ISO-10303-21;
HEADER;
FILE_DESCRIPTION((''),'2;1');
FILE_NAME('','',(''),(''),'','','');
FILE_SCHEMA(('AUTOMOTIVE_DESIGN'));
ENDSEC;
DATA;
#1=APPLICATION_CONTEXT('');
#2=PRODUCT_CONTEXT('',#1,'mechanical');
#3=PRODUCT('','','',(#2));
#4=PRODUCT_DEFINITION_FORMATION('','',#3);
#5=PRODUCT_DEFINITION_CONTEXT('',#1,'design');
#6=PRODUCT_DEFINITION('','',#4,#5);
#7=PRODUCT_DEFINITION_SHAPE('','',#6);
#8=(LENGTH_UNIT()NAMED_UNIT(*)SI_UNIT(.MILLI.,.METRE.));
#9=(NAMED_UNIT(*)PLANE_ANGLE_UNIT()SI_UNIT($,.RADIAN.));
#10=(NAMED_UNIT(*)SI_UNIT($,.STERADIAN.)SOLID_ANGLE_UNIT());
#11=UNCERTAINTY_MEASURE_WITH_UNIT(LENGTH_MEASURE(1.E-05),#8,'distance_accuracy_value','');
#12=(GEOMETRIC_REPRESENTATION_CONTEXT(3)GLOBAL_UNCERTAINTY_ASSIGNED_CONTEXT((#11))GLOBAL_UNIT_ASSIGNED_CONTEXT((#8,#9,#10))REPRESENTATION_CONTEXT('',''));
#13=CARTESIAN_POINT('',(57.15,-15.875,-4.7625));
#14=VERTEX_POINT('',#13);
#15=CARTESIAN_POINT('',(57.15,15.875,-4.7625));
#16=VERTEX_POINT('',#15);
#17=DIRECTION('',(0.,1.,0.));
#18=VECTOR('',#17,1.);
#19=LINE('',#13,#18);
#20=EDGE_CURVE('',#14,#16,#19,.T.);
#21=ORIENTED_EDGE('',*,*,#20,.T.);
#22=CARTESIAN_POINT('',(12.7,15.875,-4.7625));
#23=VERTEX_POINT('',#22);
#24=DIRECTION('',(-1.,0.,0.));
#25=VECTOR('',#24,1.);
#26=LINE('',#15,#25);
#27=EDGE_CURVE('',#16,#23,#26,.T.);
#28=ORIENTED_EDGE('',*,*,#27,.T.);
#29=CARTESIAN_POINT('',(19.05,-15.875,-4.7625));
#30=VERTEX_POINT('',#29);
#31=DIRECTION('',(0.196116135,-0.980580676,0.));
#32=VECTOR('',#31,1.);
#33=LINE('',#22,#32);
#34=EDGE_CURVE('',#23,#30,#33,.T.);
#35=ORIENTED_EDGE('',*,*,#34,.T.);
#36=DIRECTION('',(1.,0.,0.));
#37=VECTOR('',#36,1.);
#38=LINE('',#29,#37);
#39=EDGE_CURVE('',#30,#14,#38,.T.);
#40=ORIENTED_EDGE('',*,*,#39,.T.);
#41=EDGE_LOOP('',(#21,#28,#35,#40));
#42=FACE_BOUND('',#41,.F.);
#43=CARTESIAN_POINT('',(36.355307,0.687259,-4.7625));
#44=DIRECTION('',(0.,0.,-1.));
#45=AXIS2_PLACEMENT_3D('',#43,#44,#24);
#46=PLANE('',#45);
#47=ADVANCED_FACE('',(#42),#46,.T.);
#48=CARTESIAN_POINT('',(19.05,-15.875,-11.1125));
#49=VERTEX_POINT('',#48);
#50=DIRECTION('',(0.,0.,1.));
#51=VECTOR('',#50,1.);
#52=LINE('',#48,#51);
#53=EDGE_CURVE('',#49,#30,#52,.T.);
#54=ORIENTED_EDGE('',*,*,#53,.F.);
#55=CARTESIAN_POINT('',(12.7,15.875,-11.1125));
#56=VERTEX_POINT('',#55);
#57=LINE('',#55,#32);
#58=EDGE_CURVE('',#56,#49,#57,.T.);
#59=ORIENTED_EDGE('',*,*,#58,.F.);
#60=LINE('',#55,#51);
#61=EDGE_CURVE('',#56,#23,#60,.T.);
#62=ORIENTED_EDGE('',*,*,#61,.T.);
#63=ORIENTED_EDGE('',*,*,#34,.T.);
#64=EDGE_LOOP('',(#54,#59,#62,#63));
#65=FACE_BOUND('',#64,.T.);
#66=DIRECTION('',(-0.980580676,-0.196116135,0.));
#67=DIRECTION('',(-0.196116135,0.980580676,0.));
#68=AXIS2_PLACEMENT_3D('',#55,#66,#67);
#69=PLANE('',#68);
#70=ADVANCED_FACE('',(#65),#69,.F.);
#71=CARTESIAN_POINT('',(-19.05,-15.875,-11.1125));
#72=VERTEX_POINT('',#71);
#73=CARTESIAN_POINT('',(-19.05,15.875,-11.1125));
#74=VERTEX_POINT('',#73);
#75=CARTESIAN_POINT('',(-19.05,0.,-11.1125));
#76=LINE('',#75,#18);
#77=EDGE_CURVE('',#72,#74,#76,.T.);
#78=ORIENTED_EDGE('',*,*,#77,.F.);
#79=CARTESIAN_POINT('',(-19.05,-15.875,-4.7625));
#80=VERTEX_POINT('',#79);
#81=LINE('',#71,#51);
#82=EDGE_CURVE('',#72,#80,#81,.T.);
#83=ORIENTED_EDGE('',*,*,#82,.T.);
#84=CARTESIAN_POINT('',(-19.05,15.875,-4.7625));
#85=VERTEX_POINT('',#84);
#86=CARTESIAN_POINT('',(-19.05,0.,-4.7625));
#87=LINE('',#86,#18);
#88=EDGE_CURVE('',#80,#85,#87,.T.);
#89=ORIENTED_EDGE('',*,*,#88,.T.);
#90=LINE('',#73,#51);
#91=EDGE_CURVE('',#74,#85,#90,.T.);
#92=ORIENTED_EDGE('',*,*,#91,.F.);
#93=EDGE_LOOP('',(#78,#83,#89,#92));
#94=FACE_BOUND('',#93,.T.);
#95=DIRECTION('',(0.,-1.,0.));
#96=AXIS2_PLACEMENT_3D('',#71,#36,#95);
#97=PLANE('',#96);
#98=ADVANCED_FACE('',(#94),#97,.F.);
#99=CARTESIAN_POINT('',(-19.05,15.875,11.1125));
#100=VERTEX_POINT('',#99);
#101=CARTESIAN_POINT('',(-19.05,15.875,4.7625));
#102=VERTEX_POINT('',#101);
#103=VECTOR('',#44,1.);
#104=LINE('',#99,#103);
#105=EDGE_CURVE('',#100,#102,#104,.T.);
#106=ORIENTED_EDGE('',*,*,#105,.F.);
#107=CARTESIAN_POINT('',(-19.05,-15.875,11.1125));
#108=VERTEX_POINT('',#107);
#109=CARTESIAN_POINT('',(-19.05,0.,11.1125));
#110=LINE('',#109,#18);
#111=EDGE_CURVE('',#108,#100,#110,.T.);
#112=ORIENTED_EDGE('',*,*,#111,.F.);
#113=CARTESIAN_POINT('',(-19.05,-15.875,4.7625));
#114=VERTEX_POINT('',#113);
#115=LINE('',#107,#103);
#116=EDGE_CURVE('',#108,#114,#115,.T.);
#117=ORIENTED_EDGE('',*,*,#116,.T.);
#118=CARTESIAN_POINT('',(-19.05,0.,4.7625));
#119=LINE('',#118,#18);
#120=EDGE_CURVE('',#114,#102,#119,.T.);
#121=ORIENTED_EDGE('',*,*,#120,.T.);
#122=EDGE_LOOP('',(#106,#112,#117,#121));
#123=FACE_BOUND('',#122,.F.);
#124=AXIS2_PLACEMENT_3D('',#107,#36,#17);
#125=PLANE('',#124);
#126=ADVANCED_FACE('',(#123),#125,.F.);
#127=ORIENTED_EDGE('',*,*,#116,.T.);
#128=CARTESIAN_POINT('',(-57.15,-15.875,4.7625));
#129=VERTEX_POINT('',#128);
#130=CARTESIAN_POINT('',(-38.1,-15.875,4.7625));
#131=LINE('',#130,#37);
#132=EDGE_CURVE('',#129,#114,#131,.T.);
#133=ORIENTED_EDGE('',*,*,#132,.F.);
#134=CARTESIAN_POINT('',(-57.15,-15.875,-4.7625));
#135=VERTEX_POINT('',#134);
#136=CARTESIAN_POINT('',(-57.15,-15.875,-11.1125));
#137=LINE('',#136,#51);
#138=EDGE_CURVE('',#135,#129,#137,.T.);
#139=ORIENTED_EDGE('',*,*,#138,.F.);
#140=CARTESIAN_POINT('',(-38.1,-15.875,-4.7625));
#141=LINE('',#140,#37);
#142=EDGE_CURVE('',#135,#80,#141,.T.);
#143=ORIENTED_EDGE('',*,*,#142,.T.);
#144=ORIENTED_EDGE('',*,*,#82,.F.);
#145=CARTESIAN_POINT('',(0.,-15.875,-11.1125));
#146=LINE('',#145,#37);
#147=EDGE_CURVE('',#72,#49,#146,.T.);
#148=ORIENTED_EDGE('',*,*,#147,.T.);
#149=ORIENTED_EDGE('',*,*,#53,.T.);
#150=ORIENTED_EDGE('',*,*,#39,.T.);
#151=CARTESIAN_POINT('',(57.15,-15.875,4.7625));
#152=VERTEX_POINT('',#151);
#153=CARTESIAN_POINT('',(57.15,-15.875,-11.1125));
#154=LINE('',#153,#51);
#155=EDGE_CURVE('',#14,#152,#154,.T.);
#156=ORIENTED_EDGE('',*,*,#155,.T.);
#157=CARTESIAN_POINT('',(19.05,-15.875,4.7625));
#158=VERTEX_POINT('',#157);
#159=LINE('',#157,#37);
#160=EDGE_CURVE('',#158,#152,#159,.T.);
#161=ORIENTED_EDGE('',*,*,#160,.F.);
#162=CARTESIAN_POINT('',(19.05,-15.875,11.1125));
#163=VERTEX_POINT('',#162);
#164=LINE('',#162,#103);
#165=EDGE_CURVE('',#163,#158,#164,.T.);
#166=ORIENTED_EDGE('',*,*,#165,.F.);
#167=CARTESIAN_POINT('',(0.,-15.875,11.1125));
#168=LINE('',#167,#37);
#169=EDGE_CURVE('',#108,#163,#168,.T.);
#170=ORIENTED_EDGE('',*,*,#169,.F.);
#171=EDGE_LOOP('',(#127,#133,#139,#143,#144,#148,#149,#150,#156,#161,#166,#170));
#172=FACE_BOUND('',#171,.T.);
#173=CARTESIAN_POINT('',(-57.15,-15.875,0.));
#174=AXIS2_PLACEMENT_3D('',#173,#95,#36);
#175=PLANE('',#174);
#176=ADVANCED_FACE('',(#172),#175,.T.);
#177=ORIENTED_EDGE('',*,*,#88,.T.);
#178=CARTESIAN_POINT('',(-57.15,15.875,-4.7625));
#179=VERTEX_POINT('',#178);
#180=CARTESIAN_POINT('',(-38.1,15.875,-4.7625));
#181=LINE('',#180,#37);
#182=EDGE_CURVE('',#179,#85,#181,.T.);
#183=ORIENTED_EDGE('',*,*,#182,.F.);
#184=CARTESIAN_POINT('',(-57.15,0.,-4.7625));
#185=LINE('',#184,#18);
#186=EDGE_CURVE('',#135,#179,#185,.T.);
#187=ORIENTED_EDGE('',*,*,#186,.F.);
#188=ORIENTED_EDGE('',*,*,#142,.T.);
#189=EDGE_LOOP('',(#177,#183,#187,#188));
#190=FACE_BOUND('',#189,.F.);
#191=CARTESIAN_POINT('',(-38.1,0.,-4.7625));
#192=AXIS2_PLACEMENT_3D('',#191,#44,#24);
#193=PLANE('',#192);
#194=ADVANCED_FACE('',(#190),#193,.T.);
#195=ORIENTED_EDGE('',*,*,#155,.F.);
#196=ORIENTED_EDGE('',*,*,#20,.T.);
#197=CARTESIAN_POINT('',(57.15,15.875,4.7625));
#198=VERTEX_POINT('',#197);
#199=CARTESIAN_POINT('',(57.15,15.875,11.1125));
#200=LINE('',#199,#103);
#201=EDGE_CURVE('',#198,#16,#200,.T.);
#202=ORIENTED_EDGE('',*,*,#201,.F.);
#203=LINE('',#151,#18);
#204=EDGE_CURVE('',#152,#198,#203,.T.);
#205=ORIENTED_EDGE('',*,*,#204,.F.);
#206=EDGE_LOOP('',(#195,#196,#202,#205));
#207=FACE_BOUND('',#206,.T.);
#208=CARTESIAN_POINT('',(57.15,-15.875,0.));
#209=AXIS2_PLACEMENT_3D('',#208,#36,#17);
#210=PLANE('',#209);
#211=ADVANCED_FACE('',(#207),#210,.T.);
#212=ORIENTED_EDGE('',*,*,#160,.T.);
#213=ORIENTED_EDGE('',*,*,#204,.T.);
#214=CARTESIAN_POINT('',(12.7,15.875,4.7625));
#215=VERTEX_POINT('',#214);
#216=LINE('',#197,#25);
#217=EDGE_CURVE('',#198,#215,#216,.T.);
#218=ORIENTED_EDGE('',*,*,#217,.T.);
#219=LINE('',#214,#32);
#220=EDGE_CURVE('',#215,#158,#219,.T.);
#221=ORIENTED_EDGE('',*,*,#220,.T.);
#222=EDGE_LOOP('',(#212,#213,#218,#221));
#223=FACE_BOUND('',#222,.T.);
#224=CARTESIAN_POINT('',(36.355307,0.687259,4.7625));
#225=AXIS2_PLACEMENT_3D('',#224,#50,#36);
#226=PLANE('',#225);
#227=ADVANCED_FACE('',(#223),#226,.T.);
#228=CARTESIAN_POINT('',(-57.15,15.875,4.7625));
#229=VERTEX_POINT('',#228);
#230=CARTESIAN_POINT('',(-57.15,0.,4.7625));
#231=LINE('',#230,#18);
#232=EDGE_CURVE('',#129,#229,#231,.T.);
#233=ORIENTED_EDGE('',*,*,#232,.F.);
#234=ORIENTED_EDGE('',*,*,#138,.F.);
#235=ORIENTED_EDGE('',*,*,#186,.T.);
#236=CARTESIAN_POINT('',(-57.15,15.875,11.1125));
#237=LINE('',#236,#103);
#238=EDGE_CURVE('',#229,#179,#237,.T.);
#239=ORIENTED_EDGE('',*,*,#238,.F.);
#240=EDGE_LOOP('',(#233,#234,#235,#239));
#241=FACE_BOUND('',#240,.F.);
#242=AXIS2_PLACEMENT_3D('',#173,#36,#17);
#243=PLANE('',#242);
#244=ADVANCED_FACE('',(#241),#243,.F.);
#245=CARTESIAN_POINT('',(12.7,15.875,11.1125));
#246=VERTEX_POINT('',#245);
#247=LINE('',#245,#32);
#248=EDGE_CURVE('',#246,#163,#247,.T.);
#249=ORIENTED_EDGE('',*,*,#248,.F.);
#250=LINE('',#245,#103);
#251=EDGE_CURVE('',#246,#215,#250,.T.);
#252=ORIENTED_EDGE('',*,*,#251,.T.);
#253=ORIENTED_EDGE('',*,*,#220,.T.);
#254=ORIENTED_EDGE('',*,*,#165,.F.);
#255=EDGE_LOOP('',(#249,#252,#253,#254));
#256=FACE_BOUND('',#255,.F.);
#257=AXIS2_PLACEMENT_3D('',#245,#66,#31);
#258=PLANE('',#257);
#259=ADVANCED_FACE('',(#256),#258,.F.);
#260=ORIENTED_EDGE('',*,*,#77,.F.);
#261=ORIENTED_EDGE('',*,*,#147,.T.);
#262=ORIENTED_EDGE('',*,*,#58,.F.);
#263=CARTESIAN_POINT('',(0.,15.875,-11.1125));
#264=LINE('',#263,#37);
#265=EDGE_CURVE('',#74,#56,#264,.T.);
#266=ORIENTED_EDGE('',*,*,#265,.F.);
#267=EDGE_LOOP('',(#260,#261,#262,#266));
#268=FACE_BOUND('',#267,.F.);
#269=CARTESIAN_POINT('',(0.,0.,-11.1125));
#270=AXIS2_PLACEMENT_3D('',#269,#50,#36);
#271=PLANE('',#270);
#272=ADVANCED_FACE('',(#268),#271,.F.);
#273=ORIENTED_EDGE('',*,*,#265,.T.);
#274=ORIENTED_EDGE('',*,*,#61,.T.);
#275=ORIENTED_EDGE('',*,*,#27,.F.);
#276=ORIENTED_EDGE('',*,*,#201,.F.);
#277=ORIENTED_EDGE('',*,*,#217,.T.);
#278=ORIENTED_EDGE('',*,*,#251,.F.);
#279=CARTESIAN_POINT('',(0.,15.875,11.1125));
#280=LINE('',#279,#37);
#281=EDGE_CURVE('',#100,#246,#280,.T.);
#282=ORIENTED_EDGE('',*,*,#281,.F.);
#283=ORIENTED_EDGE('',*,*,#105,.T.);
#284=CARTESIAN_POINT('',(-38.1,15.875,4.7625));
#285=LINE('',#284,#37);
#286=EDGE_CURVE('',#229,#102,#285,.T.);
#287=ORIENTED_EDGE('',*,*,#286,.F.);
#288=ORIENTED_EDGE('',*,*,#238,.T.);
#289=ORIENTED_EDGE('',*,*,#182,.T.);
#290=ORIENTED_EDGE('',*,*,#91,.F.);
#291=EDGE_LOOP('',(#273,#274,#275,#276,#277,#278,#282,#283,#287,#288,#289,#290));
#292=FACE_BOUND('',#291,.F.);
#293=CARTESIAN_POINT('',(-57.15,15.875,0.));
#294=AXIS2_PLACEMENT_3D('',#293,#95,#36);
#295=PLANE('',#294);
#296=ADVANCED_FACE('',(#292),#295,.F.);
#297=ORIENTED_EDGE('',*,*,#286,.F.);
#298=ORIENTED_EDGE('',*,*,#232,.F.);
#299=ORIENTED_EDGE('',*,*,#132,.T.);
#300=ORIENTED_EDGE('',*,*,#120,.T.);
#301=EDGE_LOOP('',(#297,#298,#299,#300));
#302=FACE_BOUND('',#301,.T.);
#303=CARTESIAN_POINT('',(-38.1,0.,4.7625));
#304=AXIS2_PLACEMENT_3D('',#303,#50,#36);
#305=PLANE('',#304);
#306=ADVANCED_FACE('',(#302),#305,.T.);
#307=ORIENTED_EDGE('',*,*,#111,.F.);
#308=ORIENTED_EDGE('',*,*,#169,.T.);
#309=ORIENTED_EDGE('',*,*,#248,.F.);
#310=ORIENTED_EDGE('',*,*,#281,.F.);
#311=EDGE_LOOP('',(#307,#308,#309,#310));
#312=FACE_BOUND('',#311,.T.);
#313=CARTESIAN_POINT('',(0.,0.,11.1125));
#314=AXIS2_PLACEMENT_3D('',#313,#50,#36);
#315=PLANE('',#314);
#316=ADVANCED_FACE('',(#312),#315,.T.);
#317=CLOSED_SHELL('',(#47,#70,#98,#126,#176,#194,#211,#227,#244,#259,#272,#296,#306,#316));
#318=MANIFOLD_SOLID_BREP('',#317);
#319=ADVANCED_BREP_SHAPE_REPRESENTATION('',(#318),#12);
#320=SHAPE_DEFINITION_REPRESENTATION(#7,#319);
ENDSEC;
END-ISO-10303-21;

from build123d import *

# Parameters (mm, degrees)
F0_W     = 114.3
F0_H     = 31.75
F1_DEPTH = 11.1125
F2_W     = 38.1
F2_H     = 31.75
F3_DEPTH = 6.35
F5_DEPTH = 6.35


# Not quite as in the source:
# - a feature of the source that left no trace in its solid (it failed there, or was rolled back) is left out
# - a pattern or mirror of a feature is missing from the dataset's text; its kind, count and spacing are read off the source's solid


with BuildPart() as f1:
    # F0 (on Top) → F1 (new body, symmetric)
    with BuildSketch(Plane.XY):
        Rectangle(F0_W, F0_H)
    extrude(amount=F1_DEPTH, both=True)

    # F2 (on face) → F3 (cut)
    with BuildSketch(Plane.XY.offset(11.1125)):
        with Locations((-38.1, 0)):
            Rectangle(F2_W, F2_H)
    f3 = extrude(amount=-F3_DEPTH, mode=Mode.SUBTRACT)

    # F3_copies: F3 across plane
    add(f3.mirror(Plane(origin=(0, 0, 0), x_dir=(-1, 0, 0), z_dir=(0, 0, -1))), mode=Mode.SUBTRACT)

    # F4 (on face) → F5 (cut)
    with BuildSketch(Plane.XY.offset(11.1125)):
        Polygon((57.15, -15.875), (57.15, 15.875), (12.7, 15.875), (19.05, -15.875), align=None)
    f5 = extrude(amount=-F5_DEPTH, mode=Mode.SUBTRACT)

    # F5_copies: F5 across plane
    add(f5.mirror(Plane(origin=(0, 0, 0), x_dir=(-1, 0, 0), z_dir=(0, 0, -1))), mode=Mode.SUBTRACT)


solid = f1.part
